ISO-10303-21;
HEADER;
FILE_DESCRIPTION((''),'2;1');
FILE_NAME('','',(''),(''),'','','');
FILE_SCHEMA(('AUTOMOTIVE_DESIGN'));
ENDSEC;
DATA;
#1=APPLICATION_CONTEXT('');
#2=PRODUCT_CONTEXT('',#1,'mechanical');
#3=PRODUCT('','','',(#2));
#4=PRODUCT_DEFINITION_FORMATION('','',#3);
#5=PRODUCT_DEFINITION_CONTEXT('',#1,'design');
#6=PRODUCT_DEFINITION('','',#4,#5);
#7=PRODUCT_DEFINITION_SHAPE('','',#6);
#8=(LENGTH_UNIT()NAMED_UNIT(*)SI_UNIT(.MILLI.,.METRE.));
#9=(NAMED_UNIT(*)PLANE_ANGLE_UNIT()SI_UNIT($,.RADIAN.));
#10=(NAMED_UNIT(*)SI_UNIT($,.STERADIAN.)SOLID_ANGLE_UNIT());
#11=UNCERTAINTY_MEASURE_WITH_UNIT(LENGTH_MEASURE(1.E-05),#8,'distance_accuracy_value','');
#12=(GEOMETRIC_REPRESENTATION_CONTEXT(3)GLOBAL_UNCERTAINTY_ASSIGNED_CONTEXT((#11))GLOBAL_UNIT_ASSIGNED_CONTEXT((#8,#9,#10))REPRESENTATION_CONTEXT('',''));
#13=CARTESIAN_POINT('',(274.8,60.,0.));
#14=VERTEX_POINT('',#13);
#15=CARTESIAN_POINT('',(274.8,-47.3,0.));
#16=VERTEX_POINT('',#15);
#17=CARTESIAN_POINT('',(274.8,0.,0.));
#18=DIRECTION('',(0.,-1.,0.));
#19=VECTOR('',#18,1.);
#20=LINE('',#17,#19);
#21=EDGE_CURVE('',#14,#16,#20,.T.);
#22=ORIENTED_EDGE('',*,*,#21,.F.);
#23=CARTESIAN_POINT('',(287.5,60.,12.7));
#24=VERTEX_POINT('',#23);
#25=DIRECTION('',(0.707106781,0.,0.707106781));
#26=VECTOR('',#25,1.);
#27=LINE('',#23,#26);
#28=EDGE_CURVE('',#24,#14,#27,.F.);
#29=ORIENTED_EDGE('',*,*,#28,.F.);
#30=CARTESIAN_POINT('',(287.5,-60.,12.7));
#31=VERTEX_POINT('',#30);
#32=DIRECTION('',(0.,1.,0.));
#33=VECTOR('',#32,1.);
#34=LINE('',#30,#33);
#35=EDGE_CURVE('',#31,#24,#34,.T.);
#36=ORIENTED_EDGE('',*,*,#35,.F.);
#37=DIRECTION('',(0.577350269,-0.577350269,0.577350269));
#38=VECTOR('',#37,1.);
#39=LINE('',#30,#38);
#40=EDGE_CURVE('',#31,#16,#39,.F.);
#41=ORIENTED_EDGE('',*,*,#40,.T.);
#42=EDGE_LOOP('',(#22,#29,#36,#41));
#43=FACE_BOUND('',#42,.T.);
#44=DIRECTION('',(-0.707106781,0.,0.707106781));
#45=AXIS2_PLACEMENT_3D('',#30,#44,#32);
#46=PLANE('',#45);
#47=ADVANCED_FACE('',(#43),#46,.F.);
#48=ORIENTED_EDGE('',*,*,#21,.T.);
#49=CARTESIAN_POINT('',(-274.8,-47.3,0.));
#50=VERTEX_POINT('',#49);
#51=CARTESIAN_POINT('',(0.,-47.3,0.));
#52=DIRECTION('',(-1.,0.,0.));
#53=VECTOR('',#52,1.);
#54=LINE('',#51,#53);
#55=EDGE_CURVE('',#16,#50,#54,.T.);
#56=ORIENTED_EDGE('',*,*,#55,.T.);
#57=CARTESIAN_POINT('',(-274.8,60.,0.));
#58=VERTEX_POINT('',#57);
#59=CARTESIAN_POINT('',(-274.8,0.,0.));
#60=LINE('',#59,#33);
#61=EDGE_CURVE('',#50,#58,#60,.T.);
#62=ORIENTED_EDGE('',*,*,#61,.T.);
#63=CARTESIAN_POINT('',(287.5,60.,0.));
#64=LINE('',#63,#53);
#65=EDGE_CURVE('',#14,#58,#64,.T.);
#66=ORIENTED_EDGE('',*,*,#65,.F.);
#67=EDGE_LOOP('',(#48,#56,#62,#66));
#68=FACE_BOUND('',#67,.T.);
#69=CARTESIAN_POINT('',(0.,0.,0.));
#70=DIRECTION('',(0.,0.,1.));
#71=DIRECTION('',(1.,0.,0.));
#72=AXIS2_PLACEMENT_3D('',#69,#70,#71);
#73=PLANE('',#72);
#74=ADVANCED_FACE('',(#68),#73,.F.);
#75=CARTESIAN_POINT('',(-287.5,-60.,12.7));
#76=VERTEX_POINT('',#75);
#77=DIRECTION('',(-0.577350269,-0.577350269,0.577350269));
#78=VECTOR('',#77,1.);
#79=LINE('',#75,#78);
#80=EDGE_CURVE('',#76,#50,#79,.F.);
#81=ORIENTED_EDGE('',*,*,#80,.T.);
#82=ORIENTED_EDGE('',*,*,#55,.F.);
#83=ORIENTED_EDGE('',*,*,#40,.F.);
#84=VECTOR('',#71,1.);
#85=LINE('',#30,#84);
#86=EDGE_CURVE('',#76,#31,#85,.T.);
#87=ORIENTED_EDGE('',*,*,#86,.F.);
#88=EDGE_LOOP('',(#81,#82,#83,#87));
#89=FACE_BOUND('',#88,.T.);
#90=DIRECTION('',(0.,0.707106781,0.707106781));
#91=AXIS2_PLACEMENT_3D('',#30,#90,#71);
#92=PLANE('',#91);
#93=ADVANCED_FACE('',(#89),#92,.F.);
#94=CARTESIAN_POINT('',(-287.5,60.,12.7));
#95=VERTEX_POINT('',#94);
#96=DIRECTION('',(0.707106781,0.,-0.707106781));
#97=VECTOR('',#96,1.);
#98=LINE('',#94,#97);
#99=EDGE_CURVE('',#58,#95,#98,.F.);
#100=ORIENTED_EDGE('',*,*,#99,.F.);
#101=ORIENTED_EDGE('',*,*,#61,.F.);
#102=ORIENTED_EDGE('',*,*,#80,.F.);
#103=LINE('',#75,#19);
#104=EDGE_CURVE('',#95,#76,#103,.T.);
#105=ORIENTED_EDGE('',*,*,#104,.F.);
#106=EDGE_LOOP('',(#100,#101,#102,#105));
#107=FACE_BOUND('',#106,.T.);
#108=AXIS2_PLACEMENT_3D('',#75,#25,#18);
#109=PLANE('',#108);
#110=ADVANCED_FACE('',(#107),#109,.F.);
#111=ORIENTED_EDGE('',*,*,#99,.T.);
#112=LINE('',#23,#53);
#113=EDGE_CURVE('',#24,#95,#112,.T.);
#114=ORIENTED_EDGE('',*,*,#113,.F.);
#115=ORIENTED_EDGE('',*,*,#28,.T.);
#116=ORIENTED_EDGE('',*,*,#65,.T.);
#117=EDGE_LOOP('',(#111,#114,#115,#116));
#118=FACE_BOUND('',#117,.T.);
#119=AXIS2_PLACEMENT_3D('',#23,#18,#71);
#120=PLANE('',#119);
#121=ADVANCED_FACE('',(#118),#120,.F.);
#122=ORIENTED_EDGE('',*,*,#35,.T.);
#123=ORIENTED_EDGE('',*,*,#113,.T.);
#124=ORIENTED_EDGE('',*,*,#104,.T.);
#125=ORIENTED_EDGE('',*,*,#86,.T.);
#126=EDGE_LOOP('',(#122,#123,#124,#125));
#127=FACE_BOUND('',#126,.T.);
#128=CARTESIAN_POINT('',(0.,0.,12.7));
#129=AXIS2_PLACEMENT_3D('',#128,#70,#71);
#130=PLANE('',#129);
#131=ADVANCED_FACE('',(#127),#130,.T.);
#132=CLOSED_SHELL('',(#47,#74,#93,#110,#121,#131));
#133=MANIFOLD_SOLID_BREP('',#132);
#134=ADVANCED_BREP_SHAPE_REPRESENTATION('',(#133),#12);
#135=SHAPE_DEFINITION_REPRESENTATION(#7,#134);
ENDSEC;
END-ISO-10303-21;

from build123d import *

# Parameters (mm, degrees)
SKETCH1_W           = 575
SKETCH1_H           = 120
BOSS_EXTRUDE1_DEPTH = 12.7
CHAMFER1_SIZE       = 12.7


with BuildPart() as part:
    # Sketch1 → Boss-Extrude1 (new body)
    with BuildSketch(Plane.XY):
        Rectangle(SKETCH1_W, SKETCH1_H)
    extrude(amount=BOSS_EXTRUDE1_DEPTH)

    # Chamfer1
    chamfer1_edges = [part.edges().sort_by_distance(p)[0] for p in [
        (287.5, 0, 0),
        (0, -60, 0),
        (-287.5, 0, 0),
    ]]
    chamfer(chamfer1_edges, length=CHAMFER1_SIZE - 0.0001)  # a hair under: the kernel refuses the full size


solid = part.part
